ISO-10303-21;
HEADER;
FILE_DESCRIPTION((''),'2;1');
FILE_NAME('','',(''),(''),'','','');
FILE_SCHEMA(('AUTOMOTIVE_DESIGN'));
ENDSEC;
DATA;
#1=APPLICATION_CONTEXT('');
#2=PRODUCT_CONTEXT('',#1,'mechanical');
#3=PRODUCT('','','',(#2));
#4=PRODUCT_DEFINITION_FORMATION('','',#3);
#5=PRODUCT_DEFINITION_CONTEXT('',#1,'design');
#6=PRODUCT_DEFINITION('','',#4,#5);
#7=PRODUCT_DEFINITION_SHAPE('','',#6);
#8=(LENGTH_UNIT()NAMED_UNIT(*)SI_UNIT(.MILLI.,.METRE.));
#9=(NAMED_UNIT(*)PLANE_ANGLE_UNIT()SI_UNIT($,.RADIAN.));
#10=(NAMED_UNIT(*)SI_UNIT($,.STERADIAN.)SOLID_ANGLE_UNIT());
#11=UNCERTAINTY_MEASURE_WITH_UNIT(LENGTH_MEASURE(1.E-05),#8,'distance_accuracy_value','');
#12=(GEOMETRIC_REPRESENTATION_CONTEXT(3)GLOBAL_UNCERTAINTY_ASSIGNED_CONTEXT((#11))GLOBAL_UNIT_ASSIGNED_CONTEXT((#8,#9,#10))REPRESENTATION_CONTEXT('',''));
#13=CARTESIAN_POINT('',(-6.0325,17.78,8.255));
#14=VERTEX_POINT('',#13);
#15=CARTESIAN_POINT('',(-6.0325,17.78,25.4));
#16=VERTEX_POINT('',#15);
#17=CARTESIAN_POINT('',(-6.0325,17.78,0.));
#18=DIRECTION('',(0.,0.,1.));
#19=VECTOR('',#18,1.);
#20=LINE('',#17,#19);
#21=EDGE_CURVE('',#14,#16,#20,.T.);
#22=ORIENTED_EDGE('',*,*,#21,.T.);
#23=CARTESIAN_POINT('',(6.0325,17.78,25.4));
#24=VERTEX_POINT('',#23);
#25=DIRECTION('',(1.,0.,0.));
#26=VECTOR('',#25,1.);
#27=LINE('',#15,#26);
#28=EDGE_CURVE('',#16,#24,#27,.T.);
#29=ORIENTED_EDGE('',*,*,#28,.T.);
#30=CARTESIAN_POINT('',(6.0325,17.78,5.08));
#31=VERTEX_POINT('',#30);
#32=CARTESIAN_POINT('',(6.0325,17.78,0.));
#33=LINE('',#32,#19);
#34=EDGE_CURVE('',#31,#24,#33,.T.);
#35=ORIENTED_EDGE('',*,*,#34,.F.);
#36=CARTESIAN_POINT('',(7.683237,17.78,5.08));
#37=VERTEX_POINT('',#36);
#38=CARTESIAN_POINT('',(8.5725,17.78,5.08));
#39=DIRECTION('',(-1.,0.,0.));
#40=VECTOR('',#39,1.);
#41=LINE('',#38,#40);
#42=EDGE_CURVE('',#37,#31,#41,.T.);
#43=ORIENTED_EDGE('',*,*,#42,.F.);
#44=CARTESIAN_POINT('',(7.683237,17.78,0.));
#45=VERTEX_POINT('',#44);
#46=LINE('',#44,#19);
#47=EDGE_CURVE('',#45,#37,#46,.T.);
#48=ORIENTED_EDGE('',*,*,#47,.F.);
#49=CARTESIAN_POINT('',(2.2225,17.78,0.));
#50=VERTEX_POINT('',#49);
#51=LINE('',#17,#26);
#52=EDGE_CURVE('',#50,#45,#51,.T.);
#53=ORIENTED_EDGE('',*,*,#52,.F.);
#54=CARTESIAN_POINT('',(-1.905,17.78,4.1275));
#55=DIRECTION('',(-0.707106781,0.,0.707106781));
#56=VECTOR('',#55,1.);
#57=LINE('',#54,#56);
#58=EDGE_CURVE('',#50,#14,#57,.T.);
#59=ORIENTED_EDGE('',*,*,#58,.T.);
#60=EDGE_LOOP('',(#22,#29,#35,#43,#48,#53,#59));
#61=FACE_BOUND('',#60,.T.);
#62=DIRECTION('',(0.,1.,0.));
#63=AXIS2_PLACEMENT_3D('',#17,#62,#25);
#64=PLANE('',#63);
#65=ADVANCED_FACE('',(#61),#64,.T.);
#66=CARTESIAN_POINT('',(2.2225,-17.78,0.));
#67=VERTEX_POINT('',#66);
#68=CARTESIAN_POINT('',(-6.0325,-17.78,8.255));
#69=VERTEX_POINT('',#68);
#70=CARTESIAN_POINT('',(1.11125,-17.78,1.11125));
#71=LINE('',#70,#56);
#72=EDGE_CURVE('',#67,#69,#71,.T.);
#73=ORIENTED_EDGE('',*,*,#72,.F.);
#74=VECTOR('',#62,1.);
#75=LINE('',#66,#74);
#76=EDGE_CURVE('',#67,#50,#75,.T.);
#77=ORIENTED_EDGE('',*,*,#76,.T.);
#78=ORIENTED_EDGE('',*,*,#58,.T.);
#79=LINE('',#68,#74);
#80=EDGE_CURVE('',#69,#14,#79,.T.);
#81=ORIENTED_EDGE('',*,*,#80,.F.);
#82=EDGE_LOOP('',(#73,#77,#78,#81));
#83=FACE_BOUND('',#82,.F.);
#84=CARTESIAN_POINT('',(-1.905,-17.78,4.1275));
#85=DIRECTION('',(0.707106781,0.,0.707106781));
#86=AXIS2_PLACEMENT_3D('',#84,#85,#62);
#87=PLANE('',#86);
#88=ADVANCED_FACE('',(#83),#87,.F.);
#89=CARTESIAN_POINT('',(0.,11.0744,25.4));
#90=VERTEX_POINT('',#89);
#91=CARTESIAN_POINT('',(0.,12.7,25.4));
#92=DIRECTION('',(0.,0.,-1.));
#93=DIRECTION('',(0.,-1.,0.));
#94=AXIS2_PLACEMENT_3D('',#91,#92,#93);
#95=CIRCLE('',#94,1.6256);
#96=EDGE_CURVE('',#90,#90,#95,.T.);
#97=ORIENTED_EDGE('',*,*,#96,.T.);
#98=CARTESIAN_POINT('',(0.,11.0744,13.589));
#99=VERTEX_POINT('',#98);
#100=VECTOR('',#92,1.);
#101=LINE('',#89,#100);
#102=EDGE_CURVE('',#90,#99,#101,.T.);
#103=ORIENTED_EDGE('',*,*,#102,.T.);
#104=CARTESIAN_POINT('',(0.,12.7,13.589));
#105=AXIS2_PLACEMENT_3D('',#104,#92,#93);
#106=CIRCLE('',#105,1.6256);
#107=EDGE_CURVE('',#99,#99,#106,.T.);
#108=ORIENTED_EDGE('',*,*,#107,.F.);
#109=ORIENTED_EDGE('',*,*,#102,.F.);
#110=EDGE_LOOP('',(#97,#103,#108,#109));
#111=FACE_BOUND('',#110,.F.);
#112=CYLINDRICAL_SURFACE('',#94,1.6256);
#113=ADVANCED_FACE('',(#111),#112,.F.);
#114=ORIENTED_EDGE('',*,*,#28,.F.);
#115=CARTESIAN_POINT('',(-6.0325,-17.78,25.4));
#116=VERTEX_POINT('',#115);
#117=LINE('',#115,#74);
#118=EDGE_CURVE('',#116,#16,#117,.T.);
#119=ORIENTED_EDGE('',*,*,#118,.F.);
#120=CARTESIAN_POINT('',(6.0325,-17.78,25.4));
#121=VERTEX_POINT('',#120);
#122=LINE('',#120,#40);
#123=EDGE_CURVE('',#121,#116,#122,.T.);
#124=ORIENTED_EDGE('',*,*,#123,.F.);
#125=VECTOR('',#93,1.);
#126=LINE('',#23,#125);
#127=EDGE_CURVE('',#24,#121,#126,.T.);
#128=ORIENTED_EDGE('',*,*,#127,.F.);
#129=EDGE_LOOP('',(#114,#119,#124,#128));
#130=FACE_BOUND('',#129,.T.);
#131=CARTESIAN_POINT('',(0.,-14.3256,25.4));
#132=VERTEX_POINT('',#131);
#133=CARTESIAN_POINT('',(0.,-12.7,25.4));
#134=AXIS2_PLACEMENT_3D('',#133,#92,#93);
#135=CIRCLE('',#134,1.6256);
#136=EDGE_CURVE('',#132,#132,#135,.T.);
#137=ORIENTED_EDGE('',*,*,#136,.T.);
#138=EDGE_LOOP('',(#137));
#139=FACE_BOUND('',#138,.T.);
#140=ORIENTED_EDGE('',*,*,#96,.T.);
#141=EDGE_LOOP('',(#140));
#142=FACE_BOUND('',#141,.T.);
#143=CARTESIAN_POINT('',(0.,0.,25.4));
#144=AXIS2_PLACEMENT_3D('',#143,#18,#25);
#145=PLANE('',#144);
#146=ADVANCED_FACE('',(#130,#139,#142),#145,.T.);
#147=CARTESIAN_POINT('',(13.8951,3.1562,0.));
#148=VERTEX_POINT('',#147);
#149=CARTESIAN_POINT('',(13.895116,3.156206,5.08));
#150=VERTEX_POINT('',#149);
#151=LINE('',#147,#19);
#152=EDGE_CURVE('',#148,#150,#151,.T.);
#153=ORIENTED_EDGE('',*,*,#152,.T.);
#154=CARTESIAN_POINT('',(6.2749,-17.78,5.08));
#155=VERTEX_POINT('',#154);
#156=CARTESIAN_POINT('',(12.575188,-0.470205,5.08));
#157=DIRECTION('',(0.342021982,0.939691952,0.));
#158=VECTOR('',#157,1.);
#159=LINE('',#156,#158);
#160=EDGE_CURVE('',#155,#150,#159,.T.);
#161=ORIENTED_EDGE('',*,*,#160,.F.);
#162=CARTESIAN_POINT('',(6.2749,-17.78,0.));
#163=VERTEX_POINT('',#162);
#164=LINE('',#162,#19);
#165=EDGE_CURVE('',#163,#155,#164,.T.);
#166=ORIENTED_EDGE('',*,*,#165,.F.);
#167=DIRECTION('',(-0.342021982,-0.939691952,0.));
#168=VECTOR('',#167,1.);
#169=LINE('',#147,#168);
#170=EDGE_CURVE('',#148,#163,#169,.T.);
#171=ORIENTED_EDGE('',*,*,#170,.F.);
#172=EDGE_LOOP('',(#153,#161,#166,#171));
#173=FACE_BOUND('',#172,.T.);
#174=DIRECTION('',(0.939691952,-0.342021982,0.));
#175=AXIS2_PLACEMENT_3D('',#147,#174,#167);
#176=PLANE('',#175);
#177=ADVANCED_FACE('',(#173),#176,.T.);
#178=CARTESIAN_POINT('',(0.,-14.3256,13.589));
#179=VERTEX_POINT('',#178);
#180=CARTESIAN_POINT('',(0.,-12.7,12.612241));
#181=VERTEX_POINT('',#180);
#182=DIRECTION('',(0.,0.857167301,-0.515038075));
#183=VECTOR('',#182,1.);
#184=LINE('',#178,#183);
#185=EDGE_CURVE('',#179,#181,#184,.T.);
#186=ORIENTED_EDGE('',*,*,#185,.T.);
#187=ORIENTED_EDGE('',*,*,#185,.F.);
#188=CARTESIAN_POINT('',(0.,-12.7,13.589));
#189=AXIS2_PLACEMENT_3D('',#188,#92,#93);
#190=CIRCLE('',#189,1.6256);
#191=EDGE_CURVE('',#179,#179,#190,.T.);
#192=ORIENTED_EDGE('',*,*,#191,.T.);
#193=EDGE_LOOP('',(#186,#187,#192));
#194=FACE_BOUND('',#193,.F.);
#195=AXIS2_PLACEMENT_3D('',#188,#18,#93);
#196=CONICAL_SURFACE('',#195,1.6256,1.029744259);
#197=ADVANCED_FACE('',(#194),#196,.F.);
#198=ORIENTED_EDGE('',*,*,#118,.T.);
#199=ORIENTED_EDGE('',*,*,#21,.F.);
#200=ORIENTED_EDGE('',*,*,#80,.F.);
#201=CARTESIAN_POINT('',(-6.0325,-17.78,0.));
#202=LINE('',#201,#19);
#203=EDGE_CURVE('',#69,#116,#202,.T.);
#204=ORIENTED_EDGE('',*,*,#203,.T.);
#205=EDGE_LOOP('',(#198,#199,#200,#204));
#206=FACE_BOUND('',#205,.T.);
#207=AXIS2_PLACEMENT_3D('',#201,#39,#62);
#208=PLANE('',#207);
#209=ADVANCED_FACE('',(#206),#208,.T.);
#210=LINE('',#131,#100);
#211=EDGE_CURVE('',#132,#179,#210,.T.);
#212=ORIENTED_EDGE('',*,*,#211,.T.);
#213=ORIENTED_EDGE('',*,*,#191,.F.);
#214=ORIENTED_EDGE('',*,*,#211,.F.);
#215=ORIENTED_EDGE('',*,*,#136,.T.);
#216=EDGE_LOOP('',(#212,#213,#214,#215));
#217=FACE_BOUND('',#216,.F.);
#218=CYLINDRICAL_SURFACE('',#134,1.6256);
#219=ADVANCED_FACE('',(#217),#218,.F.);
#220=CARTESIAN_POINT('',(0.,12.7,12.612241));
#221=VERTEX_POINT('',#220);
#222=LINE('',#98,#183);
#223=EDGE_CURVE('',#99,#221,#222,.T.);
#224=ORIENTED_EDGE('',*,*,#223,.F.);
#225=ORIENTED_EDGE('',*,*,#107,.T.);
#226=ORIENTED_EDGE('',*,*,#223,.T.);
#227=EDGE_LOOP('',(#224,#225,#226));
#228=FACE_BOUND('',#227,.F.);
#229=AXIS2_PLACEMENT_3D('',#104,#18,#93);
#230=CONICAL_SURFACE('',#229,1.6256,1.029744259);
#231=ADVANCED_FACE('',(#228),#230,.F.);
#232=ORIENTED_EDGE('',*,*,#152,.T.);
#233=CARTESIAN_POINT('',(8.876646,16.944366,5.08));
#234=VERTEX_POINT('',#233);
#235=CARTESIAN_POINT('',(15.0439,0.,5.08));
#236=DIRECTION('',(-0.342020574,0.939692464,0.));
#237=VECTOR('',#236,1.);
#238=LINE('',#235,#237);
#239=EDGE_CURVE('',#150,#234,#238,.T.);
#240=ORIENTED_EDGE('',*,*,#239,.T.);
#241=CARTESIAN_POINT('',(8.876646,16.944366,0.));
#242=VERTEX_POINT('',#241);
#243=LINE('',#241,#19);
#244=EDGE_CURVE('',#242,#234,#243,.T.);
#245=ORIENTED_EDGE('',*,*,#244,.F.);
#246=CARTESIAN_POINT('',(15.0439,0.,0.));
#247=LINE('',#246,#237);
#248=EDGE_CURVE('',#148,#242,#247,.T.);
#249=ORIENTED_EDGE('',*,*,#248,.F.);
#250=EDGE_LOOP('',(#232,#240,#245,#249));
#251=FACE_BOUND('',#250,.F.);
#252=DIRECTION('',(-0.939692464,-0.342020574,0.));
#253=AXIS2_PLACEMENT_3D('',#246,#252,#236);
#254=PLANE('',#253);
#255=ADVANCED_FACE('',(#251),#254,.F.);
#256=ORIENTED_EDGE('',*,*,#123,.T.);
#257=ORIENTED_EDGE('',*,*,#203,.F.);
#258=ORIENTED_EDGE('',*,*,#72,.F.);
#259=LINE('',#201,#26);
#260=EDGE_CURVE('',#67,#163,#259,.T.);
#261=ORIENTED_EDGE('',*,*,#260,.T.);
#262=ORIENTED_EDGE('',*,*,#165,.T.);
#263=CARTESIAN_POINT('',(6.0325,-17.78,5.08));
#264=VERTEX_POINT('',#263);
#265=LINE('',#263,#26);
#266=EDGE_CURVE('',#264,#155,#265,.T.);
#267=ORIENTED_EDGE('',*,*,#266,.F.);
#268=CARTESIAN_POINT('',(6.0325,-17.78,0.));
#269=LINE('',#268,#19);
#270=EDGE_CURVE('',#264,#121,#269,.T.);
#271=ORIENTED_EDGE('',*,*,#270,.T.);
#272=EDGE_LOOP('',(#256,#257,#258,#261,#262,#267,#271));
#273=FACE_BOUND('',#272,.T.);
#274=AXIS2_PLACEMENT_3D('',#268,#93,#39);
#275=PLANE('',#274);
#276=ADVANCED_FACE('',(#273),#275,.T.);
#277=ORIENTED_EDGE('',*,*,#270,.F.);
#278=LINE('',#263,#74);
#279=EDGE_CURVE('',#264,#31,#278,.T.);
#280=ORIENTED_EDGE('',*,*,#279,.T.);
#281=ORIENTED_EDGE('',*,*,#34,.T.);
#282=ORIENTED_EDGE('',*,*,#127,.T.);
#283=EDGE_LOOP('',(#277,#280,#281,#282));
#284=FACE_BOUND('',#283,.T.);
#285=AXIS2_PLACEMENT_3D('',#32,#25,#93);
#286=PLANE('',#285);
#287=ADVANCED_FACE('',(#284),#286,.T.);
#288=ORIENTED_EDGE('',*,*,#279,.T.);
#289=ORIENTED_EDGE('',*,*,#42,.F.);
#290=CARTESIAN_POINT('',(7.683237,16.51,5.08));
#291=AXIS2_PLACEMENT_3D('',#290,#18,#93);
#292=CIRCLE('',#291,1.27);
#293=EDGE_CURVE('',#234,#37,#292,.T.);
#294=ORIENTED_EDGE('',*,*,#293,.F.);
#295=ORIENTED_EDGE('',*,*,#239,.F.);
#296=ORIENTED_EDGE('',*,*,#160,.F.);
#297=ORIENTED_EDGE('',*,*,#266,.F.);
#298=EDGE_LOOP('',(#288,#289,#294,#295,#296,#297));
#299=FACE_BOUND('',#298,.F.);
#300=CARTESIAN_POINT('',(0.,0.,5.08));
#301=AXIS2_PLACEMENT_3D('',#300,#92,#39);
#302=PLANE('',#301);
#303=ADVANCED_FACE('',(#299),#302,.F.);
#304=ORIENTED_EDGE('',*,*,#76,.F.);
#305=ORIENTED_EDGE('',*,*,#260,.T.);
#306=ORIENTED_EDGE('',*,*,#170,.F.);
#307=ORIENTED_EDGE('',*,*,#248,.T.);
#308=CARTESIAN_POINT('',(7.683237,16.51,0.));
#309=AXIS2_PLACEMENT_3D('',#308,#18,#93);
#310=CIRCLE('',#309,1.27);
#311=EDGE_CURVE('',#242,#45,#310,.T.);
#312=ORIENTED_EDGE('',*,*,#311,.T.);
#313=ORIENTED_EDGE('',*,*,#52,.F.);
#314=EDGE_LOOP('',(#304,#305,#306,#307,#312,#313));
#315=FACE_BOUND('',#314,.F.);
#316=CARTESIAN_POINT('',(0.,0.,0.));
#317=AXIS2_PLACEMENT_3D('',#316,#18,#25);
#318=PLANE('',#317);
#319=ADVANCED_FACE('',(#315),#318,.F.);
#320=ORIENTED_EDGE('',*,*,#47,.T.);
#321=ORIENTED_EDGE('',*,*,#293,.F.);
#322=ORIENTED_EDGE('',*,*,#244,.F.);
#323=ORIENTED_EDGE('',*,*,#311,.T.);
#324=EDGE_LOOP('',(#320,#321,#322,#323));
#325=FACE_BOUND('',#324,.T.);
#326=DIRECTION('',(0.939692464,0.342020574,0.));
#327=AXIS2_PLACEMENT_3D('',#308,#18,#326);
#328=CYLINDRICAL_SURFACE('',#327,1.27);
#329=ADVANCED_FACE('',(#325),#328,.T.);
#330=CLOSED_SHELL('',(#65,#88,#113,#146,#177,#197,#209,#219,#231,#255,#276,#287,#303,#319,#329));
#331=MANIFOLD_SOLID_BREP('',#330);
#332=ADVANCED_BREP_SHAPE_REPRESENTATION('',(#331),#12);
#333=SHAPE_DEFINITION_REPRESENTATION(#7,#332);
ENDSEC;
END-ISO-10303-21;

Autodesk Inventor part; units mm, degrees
ref_plane "YZ Plane" through (0, 0, 0) normal (1, 0, 0) x (0, 1, 0)
ref_plane "XZ Plane" through (0, 0, 0) normal (0, 1, 0) x (-1, 0, 0)
ref_plane "XY Plane" through (0, 0, 0) normal (0, 0, 1) x (1, 0, 0)
sketch "Sketch1" plane through (0, 0, 0) normal (0, 0, 1) x (1, 0, 0)
  line L0 (6.0325, -17.78) -> (-6.0325, -17.78)
  line L1 (-6.0325, -17.78) -> (-6.0325, 17.78)
  line L2 (-6.0325, 17.78) -> (6.0325, 17.78)
  line L3 (6.0325, 17.78) -> (6.0325, -17.78)
  line L4 (6.0325, -17.78) -> (-6.0325, 17.78) construction
  line L5 (-6.0325, -17.78) -> (6.0325, 17.78) construction
  point P0 (0, 0)
  dimension "d0" = 12.065
  dimension "d1" = 35.56
extrude "Extrusion1" add sketch "Sketch1" along normal blind 25.4
sketch "Sketch3" plane through (0, 0, 25.4) normal (0, 0, 1) x (1, 0, 0)
  line L0 (6.0325, -17.78) -> (6.0325, 17.78) projected
  line L1 (0, 26.67) -> (0, -26.67) projected
  line L2 (-8.4455, 0) -> (8.4455, 0) projected
  point P0 (0, 12.7)
  point P1 (0, -12.7)
  dimension "d45" = 12.7
  dimension "d46" = 12.7
  dimension "d47" = 0
hole "Hole5" at (0, 12.7, 25.4) at (0, -12.7, 25.4) direction (0, 0, -1) diameter 3.2512 depth 11.811 tip angle 118
sketch "Sketch7" plane through (0, 0, 0) normal (0, 0, -1) x (-1, 0, 0)
  line L0 (-6.0325, -17.78) -> (6.0325, -17.78) projected
  line L1 (6.0325, 17.78) -> (-6.0325, 17.78) projected
  line L2 (-6.0325, 17.78) -> (-6.0325, -17.78) projected
  line L3 (-15.0439, 0) -> (-8.5725, -17.78)
  line L4 (-6.0325, -17.78) -> (-8.5725, -17.78)
  line L5 (-15.0439, 0) -> (-8.5725, 17.78)
  line L6 (-8.5725, 17.78) -> (-6.0325, 17.78)
  line L7 (0, -26.67) -> (0, 26.67) projected
  line L8 (-19.0666, 0) -> (10.2157, 0) projected
  point P0 (0, 0)
  dimension "d70" = 70
  dimension "d71" = 70
  dimension "d72" = 2.54
extrude "Extrusion6" add sketch "Sketch7" against normal blind 5.08 contours L4 L3 L8 L2 | L8 L5 L6 L2
fillet "Fillet1" radius 3.175 1 edges at (15.0439, 0, 2.54)
fillet "Fillet2" radius 1.27 2 edges at (8.5725, -17.78, 2.54) (8.5725, 17.78, 2.54)
chamfer "Chamfer1" distance 8.255 angle 45 1 edges at (-6.0325, 0, 0)
sketch "Sketch8" plane through (0, 0, 0) normal (0, 0, -1) x (-1, 0, 0)
  line L0 (-2.2225, 17.78) -> (-2.2225, -17.78) projected
  line L1 (-2.2225, 17.78) -> (-7.6832, 17.78) projected
  arc A0 (-7.6832, 17.78) -> (-8.8766, 16.9444) centre (-7.6832, 16.51) ccw projected
  line L2 (-8.8766, 16.9444) -> (-14.6487, 1.0859) projected
  arc A1 (-14.6487, 1.0859) -> (-14.6487, -1.0859) centre (-11.6651, 0) ccw projected
  line L3 (-14.6487, -1.0859) -> (-8.8766, -16.9444) projected
  arc A2 (-8.8766, -16.9444) -> (-7.6832, -17.78) centre (-7.6832, -16.51) ccw projected
  line L4 (-7.6832, -17.78) -> (-2.2225, -17.78) projected
  line L5 (-14.6487, 1.0859) -> (-8.8766, 16.9444) projected
  line L6 (-13.8951, 3.1562) -> (-6.2749, -17.78)
  line L7 (-14.6487, -1.0859) -> (-8.8766, -16.9444) projected
  point P0 (0, 0)
  dimension "d80" = 2.159
extrude "Extrusion7" cut sketch "Sketch8" against normal up to next contours L4 A2 L3 A1 L2 L6
properties part number "J005413" material "ALUMINUM, 6061-T651"
